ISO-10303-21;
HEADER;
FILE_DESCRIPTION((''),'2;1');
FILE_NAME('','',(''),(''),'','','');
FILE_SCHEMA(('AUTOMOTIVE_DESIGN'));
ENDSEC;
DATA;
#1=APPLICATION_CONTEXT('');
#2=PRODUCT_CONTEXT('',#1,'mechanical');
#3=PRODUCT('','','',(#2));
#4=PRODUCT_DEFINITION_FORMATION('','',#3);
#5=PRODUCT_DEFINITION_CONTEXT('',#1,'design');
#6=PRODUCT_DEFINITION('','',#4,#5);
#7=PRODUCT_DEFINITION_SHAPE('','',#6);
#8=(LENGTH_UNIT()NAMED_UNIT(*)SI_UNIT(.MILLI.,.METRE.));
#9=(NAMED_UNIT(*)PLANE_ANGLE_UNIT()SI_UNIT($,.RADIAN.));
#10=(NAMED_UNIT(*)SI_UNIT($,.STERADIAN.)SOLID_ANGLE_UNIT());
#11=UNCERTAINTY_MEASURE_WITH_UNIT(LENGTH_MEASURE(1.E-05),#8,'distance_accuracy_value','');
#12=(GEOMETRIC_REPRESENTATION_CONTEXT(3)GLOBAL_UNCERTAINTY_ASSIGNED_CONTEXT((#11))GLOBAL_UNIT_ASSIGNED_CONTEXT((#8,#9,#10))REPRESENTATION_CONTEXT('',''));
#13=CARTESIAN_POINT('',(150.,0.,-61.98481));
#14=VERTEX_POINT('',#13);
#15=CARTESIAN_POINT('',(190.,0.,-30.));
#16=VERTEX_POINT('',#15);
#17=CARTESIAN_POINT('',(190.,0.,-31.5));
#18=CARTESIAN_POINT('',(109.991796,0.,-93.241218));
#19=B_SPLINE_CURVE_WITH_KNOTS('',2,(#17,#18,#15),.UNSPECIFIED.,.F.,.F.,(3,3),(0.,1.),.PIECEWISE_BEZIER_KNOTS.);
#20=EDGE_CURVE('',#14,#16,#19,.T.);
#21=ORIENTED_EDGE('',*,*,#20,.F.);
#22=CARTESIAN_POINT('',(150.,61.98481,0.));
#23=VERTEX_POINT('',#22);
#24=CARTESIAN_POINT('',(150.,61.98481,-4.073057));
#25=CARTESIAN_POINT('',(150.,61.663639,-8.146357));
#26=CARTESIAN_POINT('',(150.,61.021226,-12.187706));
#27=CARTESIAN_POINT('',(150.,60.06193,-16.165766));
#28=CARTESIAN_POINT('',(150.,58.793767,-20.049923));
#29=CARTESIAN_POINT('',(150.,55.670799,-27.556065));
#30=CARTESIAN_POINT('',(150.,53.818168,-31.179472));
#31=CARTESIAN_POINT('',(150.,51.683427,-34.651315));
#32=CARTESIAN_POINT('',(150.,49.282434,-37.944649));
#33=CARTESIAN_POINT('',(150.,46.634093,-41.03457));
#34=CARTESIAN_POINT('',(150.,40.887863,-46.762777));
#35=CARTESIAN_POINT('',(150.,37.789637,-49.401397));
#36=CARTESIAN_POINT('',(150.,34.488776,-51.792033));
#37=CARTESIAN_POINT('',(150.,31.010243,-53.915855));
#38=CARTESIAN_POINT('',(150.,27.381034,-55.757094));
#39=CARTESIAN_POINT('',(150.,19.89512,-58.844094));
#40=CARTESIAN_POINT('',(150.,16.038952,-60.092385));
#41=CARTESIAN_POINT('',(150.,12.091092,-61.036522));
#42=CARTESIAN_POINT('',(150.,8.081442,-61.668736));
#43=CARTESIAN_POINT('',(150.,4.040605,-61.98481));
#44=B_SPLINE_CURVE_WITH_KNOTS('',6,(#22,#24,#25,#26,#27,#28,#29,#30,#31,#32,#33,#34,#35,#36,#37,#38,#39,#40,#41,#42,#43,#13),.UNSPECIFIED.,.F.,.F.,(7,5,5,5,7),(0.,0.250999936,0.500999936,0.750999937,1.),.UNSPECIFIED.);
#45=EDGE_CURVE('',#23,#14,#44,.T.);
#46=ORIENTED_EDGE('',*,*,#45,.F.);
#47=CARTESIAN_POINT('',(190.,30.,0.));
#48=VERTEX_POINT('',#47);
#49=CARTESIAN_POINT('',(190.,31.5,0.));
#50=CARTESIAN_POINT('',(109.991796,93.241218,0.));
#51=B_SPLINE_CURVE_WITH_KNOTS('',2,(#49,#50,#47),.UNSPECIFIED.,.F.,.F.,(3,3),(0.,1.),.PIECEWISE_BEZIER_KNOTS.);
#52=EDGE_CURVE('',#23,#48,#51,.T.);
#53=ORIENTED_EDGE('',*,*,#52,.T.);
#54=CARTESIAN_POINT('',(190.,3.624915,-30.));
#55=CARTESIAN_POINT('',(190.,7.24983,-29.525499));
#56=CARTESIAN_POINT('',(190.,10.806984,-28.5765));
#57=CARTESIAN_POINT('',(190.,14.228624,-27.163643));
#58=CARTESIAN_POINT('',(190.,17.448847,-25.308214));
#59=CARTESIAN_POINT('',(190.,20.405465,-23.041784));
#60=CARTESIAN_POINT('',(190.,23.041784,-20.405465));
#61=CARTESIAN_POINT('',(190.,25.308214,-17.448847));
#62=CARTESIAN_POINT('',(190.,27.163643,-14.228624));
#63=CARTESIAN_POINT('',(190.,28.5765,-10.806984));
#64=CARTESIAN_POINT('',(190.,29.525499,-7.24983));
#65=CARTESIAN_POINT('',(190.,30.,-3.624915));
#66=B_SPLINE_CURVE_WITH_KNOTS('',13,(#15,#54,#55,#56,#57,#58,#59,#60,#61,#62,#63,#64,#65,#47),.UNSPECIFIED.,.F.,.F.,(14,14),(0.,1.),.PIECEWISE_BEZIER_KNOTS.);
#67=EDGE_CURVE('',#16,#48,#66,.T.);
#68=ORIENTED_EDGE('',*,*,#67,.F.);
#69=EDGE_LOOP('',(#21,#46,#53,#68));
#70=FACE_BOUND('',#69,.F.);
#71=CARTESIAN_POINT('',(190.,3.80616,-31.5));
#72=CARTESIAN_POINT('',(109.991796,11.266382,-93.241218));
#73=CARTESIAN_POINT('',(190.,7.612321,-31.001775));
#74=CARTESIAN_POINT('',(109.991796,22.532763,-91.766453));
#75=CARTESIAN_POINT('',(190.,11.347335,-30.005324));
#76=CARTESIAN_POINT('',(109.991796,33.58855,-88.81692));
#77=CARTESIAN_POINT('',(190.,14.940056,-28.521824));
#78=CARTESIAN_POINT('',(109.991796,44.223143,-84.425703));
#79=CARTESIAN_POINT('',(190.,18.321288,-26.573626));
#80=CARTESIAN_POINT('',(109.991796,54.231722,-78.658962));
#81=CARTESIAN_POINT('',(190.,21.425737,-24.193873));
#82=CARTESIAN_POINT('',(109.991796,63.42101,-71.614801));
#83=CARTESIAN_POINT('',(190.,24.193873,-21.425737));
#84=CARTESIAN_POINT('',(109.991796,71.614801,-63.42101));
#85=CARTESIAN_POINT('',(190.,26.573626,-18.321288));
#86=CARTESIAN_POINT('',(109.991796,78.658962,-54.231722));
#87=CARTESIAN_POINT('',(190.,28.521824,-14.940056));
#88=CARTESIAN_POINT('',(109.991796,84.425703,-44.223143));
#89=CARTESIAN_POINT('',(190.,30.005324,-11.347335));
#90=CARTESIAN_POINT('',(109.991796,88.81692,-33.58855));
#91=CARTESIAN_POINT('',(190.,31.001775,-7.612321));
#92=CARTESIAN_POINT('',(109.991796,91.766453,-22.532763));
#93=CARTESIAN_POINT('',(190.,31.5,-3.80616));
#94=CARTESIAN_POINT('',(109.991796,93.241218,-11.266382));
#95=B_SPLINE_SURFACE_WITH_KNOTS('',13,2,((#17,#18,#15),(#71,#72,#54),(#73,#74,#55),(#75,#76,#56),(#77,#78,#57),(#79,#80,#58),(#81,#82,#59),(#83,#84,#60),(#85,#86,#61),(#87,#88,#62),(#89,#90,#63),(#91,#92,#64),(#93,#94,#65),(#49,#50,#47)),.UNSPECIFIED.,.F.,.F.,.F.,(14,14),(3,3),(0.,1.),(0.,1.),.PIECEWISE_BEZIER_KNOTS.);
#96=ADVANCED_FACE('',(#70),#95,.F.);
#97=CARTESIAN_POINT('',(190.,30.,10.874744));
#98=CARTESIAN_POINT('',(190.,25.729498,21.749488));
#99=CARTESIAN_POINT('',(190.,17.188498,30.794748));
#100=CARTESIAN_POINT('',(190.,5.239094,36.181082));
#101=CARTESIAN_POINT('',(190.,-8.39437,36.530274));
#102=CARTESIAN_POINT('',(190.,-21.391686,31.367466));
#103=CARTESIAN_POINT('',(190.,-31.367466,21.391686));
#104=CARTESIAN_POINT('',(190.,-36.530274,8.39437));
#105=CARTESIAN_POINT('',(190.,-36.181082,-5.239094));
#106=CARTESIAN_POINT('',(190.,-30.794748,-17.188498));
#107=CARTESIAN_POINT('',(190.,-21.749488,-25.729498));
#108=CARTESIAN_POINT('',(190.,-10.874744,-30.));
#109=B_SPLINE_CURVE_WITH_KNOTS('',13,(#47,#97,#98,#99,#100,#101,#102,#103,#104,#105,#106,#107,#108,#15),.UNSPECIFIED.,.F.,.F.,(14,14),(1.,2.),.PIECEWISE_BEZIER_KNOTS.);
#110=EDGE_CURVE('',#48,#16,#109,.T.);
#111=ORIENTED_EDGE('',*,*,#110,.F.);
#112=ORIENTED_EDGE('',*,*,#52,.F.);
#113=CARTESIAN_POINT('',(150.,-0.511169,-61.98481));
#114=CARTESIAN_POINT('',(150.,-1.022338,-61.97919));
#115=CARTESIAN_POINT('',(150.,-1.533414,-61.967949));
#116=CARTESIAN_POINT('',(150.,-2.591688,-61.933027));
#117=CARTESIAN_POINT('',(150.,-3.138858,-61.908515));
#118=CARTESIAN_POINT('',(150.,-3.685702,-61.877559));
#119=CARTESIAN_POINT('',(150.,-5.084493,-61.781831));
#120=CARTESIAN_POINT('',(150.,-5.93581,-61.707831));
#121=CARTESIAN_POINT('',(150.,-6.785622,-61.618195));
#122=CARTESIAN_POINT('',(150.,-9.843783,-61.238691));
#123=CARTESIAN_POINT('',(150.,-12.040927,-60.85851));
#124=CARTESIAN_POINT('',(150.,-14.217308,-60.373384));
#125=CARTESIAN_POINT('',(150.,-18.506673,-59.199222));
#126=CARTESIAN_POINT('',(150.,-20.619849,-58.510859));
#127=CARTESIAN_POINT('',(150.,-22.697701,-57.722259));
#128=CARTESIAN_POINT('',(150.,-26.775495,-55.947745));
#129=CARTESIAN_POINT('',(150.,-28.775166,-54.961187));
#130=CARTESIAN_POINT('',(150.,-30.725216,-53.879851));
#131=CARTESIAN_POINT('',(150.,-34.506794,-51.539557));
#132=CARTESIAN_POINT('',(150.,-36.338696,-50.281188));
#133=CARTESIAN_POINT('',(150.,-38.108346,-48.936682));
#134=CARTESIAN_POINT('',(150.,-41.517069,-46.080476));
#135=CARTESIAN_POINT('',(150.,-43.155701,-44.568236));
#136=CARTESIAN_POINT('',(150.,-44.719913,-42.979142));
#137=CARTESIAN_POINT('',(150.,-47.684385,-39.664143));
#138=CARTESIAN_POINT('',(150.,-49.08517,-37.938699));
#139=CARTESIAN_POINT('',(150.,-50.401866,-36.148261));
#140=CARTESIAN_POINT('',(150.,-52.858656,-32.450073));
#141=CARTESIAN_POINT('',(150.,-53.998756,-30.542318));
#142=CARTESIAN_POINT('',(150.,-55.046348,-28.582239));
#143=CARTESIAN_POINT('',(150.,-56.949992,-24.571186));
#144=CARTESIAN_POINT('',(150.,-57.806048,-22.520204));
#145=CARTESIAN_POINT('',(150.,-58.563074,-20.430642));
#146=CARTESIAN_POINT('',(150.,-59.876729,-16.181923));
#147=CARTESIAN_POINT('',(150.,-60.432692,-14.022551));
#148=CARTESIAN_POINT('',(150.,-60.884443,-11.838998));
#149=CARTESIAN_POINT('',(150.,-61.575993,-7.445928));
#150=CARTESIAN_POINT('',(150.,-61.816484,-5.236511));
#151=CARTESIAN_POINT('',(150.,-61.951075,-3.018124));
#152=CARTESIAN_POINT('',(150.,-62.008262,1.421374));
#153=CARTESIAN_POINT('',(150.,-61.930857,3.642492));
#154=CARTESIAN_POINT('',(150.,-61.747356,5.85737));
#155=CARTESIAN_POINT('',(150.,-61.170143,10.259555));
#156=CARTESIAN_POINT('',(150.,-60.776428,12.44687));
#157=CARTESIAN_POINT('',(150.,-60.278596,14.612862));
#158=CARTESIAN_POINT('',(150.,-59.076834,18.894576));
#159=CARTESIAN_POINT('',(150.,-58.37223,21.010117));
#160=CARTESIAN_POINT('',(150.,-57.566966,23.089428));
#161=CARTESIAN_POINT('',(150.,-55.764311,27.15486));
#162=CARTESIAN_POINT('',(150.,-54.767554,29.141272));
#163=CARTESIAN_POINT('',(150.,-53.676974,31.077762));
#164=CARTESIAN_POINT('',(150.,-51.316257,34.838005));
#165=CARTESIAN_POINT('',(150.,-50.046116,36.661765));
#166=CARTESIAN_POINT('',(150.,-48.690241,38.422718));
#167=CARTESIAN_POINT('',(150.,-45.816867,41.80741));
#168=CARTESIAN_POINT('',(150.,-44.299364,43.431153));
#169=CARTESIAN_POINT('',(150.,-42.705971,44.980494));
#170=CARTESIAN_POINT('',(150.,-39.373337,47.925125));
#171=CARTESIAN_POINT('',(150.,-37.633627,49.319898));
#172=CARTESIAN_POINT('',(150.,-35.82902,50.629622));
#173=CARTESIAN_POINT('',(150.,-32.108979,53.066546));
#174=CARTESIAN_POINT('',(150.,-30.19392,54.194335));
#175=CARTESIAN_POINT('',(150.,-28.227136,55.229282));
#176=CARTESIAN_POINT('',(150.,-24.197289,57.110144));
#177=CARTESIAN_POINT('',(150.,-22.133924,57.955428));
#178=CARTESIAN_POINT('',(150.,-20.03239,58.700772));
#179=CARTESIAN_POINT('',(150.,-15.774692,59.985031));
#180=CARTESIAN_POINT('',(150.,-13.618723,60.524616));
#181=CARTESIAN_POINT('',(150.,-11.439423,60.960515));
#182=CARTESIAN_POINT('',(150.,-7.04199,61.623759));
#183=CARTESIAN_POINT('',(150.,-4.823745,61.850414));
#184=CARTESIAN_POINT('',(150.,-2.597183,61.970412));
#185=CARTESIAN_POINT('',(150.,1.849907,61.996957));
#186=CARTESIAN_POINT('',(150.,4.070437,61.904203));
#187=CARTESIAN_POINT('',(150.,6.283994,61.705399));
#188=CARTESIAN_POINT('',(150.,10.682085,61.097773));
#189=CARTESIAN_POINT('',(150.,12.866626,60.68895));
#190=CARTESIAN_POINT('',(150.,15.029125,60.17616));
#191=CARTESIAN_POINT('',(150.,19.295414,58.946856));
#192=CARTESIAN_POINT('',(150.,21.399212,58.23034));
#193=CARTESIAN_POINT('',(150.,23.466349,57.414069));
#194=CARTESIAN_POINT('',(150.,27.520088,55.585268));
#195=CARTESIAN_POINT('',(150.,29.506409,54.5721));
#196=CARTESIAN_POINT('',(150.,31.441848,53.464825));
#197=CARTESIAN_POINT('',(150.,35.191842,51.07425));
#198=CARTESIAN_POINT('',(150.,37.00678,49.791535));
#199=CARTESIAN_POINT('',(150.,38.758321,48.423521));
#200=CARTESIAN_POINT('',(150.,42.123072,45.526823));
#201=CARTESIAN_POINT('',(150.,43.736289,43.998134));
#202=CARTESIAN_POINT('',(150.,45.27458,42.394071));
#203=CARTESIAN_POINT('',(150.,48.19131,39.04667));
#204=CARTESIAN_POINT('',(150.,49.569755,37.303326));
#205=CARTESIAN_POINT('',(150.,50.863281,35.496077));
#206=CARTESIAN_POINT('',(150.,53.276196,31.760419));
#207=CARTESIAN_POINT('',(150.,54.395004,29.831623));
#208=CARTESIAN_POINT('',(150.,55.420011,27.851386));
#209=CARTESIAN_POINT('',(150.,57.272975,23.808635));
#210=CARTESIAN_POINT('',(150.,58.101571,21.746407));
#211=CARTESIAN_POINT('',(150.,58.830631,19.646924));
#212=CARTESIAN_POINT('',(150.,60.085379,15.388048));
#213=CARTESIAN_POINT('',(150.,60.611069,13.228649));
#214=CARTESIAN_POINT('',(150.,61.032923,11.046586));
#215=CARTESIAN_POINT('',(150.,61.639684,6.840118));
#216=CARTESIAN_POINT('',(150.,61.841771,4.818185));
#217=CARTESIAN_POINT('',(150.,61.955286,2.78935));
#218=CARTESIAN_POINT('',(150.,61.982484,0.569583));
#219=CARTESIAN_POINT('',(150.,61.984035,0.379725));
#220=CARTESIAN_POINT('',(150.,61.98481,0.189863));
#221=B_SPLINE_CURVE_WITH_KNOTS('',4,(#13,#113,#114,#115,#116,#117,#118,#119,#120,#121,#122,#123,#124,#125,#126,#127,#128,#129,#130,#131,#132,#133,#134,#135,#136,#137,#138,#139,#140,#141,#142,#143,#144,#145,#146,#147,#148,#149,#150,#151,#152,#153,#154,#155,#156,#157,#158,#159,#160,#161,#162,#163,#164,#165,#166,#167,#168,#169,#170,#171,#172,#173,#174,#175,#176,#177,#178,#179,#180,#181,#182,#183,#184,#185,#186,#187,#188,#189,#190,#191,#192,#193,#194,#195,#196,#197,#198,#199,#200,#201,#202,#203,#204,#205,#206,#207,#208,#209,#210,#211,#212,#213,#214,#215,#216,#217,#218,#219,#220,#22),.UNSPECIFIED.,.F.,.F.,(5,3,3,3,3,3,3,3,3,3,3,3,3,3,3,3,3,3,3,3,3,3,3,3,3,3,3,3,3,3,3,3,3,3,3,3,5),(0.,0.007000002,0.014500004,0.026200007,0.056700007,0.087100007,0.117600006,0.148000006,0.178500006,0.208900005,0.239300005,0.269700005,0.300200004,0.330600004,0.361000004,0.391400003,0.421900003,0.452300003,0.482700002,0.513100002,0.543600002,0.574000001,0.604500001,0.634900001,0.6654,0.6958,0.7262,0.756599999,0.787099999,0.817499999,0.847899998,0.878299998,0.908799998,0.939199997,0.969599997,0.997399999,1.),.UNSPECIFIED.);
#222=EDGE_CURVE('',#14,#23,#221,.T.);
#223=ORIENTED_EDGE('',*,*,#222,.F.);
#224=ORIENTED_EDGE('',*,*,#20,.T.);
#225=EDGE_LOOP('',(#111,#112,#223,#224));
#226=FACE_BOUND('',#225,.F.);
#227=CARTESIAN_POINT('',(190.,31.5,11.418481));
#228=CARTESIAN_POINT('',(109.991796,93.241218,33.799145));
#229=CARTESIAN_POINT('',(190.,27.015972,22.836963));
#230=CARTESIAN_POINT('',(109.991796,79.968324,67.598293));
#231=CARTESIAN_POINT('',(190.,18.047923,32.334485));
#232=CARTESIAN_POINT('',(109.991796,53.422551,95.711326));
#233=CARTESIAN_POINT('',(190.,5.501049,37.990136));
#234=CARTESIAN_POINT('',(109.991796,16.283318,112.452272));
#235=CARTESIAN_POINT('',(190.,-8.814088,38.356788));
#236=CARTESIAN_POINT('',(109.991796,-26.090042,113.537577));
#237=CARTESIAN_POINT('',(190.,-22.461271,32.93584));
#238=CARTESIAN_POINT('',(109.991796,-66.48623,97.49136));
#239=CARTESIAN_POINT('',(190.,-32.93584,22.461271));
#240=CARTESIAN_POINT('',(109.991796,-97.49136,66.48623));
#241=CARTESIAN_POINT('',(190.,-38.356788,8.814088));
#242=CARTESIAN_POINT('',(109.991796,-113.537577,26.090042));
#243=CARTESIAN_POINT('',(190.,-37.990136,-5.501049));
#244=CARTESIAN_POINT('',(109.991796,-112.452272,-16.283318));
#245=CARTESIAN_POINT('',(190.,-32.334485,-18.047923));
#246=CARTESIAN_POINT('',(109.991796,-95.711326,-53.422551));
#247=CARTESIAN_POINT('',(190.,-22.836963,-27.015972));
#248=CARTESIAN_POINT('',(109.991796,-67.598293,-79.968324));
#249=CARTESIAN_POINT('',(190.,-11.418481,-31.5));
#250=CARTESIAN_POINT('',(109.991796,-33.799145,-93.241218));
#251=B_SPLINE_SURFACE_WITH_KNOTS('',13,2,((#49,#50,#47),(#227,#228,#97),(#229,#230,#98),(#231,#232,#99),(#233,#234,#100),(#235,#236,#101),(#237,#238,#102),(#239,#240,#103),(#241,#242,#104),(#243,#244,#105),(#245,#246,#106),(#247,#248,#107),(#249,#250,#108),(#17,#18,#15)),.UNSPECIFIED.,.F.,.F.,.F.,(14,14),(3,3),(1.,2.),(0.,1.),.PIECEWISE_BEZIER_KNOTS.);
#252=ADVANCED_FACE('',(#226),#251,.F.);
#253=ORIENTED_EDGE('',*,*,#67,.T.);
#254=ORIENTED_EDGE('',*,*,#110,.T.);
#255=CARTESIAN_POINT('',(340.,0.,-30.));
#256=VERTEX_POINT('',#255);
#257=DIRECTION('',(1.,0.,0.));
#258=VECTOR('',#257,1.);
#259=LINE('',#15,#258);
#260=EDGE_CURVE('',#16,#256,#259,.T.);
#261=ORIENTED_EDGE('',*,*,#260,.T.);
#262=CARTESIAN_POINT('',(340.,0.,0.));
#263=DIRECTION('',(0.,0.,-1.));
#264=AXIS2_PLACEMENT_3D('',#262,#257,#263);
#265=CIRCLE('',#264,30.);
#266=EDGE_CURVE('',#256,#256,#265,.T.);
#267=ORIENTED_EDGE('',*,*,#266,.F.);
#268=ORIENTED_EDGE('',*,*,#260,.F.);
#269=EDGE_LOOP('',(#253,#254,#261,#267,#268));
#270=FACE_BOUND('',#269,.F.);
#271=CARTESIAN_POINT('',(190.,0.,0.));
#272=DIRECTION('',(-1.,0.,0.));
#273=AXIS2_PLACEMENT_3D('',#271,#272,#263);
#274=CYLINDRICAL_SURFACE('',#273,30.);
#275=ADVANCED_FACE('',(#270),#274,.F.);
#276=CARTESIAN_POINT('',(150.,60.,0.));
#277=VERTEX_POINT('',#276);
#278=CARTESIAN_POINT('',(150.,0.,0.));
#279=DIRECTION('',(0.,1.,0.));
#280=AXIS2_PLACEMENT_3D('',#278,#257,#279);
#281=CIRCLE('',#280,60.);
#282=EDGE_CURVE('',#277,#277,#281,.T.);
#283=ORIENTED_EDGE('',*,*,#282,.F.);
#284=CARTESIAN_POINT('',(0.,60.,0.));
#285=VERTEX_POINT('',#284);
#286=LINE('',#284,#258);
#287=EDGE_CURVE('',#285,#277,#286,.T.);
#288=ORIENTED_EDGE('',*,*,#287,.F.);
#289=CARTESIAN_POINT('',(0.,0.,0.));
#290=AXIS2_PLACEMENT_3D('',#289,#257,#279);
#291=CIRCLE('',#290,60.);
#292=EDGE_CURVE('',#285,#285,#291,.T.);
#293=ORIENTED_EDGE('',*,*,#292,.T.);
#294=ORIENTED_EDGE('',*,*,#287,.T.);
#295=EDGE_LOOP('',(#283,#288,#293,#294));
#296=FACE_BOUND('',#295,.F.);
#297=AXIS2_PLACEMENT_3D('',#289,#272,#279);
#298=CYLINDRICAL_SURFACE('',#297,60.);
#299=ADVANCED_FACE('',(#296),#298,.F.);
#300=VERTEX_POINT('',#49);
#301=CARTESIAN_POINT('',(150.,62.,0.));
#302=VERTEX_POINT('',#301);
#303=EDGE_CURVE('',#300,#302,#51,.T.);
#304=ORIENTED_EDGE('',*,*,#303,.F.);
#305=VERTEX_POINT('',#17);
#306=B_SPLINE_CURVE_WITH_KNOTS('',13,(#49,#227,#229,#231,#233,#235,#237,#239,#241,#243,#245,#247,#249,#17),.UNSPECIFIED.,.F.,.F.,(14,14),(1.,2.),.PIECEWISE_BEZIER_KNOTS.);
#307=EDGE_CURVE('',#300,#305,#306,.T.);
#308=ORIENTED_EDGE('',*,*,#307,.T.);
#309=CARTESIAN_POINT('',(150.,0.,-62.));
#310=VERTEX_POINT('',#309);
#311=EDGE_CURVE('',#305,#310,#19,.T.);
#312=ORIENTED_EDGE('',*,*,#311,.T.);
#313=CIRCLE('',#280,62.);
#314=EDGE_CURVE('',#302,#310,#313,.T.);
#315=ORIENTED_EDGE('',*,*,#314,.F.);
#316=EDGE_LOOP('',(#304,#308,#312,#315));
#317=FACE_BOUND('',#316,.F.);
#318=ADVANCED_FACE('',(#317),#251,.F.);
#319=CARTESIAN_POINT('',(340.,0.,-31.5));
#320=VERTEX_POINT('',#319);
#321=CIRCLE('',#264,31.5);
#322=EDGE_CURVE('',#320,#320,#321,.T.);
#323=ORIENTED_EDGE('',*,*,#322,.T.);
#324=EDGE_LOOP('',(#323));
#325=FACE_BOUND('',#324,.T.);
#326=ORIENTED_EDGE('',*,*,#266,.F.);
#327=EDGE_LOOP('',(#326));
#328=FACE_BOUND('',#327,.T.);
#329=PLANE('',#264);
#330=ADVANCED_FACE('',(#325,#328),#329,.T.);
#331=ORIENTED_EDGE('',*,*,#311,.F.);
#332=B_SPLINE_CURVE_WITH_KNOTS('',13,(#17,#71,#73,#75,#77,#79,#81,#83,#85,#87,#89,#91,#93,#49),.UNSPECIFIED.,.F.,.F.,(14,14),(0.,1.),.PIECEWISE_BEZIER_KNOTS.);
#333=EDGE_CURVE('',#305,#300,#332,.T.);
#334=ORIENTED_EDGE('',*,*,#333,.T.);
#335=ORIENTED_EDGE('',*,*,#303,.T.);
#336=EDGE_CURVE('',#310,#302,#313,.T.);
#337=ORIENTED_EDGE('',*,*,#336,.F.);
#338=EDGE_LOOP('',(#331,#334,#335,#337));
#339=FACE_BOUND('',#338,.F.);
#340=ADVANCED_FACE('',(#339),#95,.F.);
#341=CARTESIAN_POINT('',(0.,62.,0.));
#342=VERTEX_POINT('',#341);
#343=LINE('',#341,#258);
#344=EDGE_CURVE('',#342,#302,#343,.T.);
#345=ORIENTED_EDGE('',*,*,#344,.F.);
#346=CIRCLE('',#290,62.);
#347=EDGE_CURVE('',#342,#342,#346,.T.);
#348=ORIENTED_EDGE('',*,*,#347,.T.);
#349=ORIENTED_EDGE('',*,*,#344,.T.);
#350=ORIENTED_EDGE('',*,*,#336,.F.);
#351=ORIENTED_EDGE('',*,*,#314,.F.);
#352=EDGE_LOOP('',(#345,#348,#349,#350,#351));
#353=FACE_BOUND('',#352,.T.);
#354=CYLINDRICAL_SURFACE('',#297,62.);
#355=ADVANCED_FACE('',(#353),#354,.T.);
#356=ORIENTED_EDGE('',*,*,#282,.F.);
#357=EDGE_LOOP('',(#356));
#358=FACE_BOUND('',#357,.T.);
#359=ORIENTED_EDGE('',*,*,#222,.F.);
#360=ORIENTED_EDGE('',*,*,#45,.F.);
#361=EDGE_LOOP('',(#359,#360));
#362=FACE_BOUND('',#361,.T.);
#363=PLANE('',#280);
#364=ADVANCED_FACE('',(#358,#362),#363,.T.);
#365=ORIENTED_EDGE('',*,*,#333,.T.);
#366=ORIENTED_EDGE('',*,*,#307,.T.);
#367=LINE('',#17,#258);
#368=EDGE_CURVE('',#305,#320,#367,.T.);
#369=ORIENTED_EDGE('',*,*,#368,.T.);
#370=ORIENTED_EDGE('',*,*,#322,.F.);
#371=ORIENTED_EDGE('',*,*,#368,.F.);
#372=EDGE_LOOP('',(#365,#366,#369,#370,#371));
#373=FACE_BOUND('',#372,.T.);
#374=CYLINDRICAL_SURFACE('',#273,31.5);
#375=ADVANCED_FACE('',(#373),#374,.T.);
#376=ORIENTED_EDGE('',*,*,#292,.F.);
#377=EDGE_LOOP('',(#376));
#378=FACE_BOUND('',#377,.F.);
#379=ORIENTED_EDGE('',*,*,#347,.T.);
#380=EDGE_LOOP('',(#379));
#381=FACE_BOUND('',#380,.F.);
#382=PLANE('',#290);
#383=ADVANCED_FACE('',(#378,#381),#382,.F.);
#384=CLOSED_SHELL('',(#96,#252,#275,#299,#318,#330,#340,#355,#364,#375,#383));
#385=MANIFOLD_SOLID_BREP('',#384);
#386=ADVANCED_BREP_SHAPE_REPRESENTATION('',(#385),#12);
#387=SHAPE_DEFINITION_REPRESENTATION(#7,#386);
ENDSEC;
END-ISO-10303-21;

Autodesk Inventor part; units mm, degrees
ref_plane "YZ Plane" through (0, 0, 0) normal (1, 0, 0) x (0, 1, 0)
ref_plane "XZ Plane" through (0, 0, 0) normal (0, 1, 0) x (-1, 0, 0)
sketch "Boceto1" plane through (0, 0, 0) normal (1, 0, 0) x (0, 1, 0)
  circle A0 centre (0, 0) radius 60
  circle A1 centre (0, 0) radius 62
  line L0 (0, 0) -> (1013.9731, 0) construction
  dimension "d0" = 120
  dimension "d1" = 124
extrude "Extrusión1" add sketch "Boceto1" along normal blind 150
ref_plane "Plano de trabajo1" through (190, 0, 0) normal (1, 0, 0) x (0, 0, -1)
sketch "Boceto4" plane through (190, 0, 0) normal (1, 0, 0) x (0, 0, -1)
  circle A0 centre (0, 0) radius 30
  circle A1 centre (0, 0) radius 31.5
  dimension "d6" = 60
  dimension "d7" = 63
extrude "Extrusión2" add sketch "Boceto4" along normal blind 150
loft "Solevación1" add section 1 edges at (190, 0, 31.5) section 2 edges at (150, -62, 0) section 3 edges at (190, 0, 30)
properties part number "Tubo tolba" material "PVC, no plastificado"
